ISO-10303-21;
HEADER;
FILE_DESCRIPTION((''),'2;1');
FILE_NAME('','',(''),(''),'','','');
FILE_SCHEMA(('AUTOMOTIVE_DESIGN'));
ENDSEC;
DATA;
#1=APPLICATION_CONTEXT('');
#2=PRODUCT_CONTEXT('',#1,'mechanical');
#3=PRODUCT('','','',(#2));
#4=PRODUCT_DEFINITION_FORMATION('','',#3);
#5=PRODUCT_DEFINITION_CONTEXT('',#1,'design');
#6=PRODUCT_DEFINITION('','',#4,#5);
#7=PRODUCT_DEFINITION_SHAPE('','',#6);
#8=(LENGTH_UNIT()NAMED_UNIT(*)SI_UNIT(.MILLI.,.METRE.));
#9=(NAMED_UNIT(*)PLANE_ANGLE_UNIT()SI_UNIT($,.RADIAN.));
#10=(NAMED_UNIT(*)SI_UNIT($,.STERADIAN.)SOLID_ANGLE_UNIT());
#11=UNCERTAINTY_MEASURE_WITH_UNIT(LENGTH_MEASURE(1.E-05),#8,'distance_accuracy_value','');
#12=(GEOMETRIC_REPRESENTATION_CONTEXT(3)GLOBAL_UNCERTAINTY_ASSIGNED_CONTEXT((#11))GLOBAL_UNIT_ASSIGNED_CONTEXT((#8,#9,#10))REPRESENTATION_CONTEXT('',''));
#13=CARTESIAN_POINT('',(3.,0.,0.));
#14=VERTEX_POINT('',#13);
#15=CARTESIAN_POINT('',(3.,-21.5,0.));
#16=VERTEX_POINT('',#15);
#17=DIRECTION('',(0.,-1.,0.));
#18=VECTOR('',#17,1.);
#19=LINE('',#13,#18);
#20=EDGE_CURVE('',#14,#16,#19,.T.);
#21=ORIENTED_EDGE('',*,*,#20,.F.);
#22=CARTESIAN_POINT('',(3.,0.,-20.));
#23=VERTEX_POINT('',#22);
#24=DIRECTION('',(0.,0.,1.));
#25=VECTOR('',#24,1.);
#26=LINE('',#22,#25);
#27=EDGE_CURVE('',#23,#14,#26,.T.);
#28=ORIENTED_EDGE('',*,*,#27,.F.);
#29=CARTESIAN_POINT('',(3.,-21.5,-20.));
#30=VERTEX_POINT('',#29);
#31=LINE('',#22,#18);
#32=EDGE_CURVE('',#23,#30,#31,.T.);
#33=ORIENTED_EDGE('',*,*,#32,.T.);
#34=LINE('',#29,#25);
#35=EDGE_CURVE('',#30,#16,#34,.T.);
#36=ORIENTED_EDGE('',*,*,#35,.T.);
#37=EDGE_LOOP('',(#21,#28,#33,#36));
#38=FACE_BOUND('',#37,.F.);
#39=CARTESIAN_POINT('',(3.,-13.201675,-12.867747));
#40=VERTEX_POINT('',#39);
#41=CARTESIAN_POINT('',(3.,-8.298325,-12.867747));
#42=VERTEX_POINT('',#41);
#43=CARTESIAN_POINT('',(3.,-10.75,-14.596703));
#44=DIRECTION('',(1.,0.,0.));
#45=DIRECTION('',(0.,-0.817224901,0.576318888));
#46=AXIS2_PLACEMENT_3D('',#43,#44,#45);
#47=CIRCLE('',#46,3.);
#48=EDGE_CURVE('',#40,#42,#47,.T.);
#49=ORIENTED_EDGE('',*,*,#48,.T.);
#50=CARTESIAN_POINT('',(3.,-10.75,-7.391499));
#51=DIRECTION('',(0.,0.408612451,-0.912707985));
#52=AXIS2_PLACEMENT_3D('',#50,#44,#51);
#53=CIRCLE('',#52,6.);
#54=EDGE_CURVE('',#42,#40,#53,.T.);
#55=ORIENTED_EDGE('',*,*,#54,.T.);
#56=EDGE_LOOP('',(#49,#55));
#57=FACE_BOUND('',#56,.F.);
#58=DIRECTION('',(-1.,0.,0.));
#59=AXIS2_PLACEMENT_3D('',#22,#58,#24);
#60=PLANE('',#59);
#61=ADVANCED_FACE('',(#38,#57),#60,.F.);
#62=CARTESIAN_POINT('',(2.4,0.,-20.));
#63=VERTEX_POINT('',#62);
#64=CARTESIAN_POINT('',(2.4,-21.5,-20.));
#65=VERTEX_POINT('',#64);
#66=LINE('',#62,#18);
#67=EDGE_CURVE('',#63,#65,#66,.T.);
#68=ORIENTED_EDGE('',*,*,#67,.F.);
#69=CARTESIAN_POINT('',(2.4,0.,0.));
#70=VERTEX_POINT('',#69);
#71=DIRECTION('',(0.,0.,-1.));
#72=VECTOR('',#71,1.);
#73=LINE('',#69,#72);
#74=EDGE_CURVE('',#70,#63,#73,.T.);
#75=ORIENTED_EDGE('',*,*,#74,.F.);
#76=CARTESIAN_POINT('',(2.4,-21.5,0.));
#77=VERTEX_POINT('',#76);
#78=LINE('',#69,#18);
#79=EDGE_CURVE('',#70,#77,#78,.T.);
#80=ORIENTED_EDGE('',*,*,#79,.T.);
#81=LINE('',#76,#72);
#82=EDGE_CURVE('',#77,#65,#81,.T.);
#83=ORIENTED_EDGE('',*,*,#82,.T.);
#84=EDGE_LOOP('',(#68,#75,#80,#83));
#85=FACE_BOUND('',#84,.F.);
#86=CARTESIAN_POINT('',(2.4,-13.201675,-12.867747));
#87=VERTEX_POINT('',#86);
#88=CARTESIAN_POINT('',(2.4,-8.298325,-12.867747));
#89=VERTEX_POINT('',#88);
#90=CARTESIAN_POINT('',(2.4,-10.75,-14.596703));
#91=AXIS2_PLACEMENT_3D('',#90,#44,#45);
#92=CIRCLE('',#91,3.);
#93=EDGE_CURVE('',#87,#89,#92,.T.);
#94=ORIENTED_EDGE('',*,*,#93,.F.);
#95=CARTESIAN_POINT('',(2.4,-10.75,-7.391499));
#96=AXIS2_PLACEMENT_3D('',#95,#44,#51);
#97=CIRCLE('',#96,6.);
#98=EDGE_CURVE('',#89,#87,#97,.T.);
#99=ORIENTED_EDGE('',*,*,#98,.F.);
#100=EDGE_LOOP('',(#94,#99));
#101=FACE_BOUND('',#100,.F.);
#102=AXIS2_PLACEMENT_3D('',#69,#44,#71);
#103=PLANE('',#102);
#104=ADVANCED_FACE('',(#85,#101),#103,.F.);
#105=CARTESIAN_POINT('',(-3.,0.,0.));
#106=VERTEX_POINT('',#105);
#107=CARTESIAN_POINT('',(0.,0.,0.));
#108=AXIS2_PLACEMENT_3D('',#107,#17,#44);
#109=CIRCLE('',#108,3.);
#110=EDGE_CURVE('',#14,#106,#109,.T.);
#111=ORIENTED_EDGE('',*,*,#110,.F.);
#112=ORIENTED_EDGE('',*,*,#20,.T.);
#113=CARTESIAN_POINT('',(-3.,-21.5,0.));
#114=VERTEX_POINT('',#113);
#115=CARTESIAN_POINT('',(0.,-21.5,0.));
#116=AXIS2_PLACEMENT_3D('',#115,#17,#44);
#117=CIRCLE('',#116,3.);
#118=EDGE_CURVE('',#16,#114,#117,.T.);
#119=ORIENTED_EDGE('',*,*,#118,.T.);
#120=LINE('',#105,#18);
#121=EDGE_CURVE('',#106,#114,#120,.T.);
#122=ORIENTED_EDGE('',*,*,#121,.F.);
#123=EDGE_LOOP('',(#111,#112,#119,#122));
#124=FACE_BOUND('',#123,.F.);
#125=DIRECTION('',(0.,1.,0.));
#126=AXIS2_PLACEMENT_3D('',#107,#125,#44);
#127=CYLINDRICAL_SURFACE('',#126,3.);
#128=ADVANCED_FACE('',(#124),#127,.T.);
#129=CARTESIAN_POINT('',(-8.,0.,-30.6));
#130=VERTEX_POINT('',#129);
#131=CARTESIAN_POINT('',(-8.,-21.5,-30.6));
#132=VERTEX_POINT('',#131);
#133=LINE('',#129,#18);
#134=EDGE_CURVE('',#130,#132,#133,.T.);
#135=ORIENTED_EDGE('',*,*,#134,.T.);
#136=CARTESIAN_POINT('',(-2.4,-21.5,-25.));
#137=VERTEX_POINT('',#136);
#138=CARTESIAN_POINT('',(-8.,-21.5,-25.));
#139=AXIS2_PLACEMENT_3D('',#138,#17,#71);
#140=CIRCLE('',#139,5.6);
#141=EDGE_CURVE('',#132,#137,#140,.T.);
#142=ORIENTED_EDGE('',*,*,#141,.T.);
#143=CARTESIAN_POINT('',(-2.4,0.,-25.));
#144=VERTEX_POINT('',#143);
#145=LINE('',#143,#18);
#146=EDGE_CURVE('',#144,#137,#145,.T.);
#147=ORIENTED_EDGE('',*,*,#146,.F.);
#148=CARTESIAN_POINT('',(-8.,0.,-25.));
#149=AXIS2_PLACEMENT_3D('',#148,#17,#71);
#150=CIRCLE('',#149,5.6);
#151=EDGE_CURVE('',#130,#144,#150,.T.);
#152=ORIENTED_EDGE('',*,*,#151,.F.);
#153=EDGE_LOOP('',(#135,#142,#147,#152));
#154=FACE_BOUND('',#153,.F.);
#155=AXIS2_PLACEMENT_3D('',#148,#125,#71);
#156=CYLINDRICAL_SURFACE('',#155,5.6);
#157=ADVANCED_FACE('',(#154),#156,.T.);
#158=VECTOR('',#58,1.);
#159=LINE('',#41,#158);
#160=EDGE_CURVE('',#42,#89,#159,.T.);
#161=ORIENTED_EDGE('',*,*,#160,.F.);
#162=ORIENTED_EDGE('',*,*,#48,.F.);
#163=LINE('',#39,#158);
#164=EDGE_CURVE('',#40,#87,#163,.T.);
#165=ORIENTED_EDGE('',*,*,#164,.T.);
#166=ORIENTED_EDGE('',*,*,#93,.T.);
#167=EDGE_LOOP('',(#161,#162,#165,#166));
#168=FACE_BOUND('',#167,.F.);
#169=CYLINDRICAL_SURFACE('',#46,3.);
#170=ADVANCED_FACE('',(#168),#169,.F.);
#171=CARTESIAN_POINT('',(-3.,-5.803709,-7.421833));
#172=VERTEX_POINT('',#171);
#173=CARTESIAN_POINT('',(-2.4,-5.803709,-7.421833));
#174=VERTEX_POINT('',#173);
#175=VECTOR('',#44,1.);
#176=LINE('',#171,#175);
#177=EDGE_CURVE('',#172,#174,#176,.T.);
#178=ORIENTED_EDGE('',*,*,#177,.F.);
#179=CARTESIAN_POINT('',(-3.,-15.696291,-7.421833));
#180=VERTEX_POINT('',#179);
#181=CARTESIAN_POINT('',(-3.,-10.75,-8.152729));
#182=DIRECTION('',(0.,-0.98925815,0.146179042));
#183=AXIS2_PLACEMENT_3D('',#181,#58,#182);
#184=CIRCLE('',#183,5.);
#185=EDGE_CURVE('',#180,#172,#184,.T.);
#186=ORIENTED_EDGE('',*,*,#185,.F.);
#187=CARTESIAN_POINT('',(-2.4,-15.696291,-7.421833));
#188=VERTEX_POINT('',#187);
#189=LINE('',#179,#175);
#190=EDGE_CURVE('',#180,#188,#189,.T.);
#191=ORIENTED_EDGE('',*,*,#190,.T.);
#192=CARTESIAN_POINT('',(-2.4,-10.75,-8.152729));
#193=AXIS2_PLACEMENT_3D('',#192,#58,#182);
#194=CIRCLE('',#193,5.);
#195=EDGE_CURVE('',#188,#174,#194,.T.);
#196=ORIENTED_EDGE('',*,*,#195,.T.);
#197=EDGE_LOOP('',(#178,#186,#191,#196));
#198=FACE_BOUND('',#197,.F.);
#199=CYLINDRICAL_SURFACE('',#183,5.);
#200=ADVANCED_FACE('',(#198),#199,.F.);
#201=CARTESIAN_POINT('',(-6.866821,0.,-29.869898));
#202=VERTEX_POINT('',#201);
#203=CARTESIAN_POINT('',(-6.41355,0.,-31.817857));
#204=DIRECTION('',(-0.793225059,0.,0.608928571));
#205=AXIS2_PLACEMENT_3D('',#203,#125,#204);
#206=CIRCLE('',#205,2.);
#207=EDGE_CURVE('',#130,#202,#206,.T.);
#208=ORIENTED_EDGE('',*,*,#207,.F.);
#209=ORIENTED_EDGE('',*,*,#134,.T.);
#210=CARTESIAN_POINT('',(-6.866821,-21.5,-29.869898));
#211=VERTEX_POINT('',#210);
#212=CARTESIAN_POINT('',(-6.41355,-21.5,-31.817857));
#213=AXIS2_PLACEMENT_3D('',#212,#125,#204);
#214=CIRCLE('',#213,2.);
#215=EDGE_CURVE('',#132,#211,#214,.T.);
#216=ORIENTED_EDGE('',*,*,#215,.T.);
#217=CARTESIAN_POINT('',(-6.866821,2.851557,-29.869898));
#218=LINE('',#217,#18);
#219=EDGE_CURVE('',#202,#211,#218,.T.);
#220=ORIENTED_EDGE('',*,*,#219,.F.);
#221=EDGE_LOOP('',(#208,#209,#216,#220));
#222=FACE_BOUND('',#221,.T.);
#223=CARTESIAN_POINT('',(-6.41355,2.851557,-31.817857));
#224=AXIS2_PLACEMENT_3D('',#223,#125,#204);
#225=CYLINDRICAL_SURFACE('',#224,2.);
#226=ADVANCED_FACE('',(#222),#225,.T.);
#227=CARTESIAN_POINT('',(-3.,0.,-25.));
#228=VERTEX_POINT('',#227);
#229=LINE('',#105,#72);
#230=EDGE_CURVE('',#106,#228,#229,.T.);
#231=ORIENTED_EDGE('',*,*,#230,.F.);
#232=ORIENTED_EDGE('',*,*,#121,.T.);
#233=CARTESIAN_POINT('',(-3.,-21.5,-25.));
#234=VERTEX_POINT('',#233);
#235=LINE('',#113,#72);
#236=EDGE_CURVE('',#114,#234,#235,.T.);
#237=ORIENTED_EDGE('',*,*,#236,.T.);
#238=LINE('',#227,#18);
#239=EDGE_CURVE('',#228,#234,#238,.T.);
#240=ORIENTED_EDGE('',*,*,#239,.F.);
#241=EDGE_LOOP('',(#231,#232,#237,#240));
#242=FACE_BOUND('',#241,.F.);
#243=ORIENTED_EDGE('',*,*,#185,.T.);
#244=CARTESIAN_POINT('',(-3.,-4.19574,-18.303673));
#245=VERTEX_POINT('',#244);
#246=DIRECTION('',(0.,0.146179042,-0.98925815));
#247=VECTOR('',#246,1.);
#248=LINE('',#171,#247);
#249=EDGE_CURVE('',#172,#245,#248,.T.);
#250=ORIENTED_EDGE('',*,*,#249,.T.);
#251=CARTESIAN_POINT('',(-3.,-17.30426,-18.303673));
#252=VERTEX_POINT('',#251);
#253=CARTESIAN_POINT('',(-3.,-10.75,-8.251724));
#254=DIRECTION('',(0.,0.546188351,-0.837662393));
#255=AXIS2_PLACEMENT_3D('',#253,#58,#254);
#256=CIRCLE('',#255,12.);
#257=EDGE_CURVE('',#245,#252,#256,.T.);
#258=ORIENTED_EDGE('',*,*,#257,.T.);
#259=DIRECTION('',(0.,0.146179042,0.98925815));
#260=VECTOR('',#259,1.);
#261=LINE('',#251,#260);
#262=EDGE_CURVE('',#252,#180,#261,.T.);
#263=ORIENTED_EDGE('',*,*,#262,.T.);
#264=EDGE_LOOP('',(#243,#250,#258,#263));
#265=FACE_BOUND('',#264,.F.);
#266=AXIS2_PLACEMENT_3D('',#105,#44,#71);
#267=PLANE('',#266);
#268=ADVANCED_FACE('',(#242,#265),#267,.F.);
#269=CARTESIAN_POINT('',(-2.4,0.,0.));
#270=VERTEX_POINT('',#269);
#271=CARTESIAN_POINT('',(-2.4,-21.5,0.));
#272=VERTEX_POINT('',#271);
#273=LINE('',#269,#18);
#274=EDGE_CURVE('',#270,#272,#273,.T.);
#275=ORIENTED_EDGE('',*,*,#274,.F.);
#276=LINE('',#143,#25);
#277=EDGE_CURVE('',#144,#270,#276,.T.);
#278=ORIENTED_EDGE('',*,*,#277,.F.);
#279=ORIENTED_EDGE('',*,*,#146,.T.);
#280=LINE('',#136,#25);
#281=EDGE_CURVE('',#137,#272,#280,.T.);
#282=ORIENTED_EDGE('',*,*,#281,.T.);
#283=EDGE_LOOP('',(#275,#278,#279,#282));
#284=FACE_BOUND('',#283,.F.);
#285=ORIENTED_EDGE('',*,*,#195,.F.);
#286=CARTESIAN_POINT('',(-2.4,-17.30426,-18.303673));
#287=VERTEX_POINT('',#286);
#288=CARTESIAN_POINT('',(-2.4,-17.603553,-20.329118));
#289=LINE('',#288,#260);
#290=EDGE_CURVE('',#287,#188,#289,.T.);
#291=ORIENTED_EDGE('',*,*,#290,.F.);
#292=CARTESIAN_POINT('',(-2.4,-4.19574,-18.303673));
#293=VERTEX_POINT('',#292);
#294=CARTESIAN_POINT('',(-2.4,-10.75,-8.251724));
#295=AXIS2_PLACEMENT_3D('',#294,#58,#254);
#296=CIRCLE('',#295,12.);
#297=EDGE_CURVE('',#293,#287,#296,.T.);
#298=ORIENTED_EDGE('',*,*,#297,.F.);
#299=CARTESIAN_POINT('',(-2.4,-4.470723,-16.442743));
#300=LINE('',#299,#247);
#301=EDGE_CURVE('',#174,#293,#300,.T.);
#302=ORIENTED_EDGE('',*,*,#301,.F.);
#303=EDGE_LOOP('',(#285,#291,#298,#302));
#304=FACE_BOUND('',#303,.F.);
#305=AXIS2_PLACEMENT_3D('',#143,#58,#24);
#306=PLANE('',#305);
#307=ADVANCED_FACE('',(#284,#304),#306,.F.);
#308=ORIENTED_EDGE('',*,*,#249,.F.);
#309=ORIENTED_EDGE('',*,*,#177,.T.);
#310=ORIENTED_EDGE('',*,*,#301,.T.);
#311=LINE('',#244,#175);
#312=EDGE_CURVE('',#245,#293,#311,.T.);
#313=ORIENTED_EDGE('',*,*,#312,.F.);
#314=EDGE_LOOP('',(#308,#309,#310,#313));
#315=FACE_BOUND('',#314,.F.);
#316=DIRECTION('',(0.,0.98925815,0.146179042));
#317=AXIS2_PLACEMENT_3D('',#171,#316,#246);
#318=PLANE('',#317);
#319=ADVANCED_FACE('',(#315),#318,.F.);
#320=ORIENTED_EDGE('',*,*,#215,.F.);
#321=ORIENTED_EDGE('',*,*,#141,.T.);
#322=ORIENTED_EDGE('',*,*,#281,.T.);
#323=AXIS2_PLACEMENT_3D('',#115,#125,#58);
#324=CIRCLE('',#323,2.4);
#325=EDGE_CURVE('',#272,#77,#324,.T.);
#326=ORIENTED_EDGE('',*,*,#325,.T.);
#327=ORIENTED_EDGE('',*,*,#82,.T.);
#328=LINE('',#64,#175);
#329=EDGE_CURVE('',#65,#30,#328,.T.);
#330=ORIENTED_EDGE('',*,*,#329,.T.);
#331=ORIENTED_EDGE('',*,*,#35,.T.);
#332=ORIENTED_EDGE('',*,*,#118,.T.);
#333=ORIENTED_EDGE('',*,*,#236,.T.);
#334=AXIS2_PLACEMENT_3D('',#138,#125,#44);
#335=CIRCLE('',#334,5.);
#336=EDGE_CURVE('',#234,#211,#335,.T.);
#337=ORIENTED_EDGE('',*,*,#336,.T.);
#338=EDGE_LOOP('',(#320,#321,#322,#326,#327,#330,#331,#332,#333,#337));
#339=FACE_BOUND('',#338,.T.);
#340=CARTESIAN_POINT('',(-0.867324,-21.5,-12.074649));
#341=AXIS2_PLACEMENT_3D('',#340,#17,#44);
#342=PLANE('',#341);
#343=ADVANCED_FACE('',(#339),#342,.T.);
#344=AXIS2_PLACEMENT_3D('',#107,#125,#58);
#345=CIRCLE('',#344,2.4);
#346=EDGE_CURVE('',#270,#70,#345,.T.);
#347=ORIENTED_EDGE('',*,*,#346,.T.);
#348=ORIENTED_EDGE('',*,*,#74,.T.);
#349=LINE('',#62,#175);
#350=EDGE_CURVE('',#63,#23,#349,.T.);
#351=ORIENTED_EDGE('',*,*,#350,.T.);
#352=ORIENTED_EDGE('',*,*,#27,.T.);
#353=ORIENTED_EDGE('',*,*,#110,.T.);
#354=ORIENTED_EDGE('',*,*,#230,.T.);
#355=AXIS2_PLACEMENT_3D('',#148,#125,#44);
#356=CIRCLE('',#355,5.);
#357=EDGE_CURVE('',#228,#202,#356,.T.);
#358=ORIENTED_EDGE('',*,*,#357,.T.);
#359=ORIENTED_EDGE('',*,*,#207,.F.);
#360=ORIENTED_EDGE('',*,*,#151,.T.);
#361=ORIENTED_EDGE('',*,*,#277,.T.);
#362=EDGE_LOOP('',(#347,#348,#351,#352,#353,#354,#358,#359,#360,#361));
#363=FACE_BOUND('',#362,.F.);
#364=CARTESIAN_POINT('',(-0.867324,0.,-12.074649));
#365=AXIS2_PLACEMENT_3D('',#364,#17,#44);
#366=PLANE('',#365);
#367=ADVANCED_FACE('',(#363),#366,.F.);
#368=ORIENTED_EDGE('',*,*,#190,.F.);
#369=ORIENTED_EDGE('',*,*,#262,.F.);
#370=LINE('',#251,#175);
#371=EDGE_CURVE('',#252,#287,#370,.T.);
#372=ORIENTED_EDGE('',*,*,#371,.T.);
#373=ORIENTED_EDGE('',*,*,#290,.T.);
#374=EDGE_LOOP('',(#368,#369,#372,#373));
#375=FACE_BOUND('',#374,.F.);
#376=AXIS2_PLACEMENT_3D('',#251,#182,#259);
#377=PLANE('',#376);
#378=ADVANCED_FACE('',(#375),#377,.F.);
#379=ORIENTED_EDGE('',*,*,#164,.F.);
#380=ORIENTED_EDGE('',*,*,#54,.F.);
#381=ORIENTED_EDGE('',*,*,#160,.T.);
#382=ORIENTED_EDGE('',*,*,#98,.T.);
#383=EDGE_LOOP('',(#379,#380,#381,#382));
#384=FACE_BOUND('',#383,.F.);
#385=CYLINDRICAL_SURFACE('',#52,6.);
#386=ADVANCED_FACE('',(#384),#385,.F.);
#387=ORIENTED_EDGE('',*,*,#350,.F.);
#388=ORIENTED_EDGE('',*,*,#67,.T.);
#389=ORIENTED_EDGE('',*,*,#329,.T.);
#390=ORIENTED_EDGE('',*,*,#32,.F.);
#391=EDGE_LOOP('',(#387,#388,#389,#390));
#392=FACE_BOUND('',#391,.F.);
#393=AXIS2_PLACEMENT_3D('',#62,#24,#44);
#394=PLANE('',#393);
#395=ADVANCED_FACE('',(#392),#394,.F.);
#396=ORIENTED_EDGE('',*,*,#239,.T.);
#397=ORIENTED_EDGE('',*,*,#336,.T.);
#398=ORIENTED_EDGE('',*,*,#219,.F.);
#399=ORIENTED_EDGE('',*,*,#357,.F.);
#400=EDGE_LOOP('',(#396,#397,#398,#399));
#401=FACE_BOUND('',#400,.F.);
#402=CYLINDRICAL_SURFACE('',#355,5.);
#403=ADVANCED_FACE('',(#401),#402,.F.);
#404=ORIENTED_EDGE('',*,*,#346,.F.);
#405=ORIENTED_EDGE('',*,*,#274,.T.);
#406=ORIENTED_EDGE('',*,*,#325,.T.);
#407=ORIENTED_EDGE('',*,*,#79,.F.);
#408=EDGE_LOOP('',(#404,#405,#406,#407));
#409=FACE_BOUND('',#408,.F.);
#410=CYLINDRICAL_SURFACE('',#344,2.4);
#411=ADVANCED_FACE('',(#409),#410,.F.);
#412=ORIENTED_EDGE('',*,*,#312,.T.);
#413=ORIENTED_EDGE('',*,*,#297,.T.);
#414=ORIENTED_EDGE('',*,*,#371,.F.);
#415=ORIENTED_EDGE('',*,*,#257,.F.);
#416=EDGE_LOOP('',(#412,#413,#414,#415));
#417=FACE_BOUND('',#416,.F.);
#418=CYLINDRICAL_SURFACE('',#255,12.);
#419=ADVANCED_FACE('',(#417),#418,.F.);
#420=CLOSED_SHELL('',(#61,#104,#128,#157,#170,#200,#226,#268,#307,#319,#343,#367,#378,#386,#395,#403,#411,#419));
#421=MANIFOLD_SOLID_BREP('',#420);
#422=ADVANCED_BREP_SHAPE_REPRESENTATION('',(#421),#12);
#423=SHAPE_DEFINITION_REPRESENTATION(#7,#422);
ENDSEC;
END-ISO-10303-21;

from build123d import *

# Parameters (mm, degrees)
F1_DEPTH    = 21.5
F3_DEPTH    = 1
F5_DEPTH    = 1
F6_T1_DEPTH = 27.2031140795


# Not quite as in the source:
# - a fillet or chamfer that OpenCascade refuses, or shapes differently, is made with other operations: its cross-section is extruded or revolved along the edge and cut away or added


with BuildPart() as f1:
    # F0 (on Front) → F1 (new body)
    with BuildSketch(Plane.XZ):
        with BuildLine():
            Line((-3, 0), (-3, -25))
            ThreePointArc((-3, -25), (-4.4644660941, -28.5355339059), (-8, -30))
            Line((-8, -30), (-8, -30.6))
            ThreePointArc((-8, -30.6), (-4.0402020254, -28.9597979746), (-2.4, -25))
            Line((-2.4, -25), (-2.4, 0))
            ThreePointArc((-2.4, 0), (0, 2.4), (2.4, 0))
            Line((2.4, 0), (2.4, -20))
            Line((2.4, -20), (3, -20))
            Line((3, -20), (3, 0))
            ThreePointArc((3, 0), (0, 3), (-3, 0))
        make_face()
    extrude(amount=F1_DEPTH)

    # F2 (on face) → F3 (cut)
    with BuildSketch(Plane(origin=(-3, 0, 0), x_dir=(0, -1, 0), z_dir=(-1, 0, 0))):
        with BuildLine():
            Line((5.8037092493, -7.4218333804), (4.195739785, -18.3036730319))
            ThreePointArc((4.195739785, -18.3036730319), (10.75, -20.2517243137), (17.304260215, -18.3036730319))
            Line((17.304260215, -18.3036730319), (15.6962907507, -7.4218333804))
            ThreePointArc((15.6962907507, -7.4218333804), (10.75, -3.1527285914), (5.8037092493, -7.4218333804))
        make_face()
    extrude(amount=-F3_DEPTH, mode=Mode.SUBTRACT)

    # F4 (on face) → F5 (cut)
    with BuildSketch(Plane.YZ.offset(3)):
        with BuildLine():
            ThreePointArc((-13.2016747035, -12.8677467976), (-10.75, -17.5967034623), (-8.2983252965, -12.8677467976))
            ThreePointArc((-8.2983252965, -12.8677467976), (-10.75, -1.3914988898), (-13.2016747035, -12.8677467976))
        make_face()
    extrude(amount=-F5_DEPTH, mode=Mode.SUBTRACT)

    # F6: fillet of radius 2 on 1 edges, made by hand

    # F6_s2 → F6_t1 (cut)
    with BuildSketch(Plane.XZ.offset(-2.8515570398)):
        with BuildLine():
            ThreePointArc((-8, -30.6), (-7.4967757486, -30.136601148), (-6.8668213437, -29.8698979592))
            ThreePointArc((-6.8668213437, -29.8698979592), (-7.429688592, -29.9673680051), (-8, -30))
            Line((-8, -30), (-8, -30.6))
        make_face()
    extrude(amount=F6_T1_DEPTH, mode=Mode.SUBTRACT)


solid = f1.part
